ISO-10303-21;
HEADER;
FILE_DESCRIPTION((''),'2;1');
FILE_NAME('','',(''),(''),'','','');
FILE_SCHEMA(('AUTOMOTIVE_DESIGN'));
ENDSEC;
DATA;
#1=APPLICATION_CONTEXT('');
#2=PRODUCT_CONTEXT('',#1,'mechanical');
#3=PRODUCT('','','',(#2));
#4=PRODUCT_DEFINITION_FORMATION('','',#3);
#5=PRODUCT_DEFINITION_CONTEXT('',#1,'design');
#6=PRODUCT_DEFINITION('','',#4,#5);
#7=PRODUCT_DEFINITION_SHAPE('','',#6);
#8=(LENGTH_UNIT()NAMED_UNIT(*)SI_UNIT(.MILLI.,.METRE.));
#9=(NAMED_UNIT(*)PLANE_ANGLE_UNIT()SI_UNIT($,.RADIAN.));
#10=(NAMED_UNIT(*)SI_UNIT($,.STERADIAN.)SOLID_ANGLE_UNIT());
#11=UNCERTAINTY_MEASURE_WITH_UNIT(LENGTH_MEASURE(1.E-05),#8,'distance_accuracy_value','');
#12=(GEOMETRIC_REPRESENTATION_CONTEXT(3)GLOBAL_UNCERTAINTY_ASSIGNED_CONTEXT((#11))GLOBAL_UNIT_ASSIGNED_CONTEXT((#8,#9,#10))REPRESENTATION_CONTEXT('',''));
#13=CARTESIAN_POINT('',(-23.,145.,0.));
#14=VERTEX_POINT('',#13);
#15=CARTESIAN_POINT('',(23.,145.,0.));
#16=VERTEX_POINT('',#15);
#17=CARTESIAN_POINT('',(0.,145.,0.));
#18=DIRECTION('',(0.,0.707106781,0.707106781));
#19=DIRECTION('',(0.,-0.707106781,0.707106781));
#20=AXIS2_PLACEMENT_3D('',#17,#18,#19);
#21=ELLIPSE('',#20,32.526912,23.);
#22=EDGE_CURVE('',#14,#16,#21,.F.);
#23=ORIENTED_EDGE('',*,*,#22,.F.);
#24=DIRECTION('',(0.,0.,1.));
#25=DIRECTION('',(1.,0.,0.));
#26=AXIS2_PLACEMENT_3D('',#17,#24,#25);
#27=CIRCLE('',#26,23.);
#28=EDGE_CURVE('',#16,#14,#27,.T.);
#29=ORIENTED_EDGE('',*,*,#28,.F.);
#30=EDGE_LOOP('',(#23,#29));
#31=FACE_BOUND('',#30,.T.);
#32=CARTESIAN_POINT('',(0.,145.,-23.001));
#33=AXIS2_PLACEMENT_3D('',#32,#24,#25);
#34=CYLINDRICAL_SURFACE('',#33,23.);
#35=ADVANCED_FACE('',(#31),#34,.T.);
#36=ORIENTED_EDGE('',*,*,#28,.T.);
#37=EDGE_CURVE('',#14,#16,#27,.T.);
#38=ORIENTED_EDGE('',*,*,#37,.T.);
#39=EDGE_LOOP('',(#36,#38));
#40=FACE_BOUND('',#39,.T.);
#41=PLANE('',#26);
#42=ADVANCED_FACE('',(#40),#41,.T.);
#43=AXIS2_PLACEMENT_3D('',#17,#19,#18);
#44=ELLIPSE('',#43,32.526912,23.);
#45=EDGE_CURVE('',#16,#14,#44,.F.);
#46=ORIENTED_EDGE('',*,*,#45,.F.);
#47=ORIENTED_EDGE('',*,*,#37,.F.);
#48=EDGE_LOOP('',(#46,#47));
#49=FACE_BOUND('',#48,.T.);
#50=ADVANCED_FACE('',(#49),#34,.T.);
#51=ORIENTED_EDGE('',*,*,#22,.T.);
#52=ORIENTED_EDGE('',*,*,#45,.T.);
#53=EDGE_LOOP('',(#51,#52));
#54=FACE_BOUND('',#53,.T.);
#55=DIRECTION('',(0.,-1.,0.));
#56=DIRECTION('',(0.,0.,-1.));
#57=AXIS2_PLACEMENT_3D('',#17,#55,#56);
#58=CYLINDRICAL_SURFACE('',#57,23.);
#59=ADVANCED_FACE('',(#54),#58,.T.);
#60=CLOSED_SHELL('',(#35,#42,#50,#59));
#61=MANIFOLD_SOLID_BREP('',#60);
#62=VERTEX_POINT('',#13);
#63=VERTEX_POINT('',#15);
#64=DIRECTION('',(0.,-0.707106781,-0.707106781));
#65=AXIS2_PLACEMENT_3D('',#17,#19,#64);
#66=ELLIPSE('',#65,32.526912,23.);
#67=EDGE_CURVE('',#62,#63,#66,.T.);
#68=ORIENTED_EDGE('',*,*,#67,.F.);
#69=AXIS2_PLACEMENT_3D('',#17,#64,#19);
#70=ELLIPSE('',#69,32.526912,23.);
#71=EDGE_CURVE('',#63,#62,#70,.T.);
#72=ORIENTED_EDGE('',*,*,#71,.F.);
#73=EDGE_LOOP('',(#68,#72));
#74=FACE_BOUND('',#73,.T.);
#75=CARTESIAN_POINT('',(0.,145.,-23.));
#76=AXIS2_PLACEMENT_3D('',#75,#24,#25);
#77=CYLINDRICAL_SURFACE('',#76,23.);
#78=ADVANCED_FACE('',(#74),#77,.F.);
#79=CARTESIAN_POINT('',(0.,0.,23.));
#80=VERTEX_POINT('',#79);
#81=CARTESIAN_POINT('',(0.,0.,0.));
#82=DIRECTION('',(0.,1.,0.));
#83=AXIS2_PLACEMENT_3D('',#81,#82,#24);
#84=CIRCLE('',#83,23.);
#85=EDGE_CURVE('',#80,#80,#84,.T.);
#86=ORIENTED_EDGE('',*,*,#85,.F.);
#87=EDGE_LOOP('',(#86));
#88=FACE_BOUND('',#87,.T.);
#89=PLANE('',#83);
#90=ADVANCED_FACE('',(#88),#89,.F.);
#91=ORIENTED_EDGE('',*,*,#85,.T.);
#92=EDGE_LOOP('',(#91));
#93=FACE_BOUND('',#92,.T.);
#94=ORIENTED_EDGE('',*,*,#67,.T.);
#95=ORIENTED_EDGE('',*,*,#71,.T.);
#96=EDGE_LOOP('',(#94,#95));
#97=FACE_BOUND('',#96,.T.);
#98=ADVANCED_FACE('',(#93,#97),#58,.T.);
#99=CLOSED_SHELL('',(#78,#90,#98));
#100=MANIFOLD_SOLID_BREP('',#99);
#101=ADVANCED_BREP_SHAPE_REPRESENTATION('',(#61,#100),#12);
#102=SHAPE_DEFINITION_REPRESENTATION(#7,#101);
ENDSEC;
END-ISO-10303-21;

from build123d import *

# Parameters (mm, degrees)
SKETCH1_R                = 23
BOSS_EXTRUDE1_DEPTH      = 145
CUT_EXTRUDE1_DEPTH       = 149.603499286
CUT_EXTRUDE1_DEPTH_BACK  = 149.603499286
SKETCH2_4_R              = 23
BOSS_EXTRUDE3_REACH      = 150.603
BOSS_EXTRUDE3_END_RADIUS = 23
SKETCH2_R                = 23


with BuildPart() as part:
    # Sketch1 → Boss-Extrude1 (new body)
    with BuildSketch(Plane(origin=(0, 0, 0), x_dir=(1, 0, 0), z_dir=(0, 1, 0))):
        Circle(SKETCH1_R)
    extrude(amount=BOSS_EXTRUDE1_DEPTH)

    # Sketch2<4> → Cut-Extrude1 (cut, two sides: drawn at the far end of the back side and taken through both)
    with BuildSketch(Plane.XY.offset(-CUT_EXTRUDE1_DEPTH_BACK)):
        with Locations((0, 145)):
            Circle(SKETCH2_4_R)
    extrude(amount=CUT_EXTRUDE1_DEPTH + CUT_EXTRUDE1_DEPTH_BACK, mode=Mode.SUBTRACT)


with BuildPart() as body_2:
    # Boss-Extrude3: up to this cylinder (the profile starts inside it)
    boss_extrude3_end = Plane(origin=(0, 145, 0), z_dir=(0, -1, 0)) * Cylinder(BOSS_EXTRUDE3_END_RADIUS, 348.206, mode=Mode.PRIVATE)
    # Sketch2 → Boss-Extrude3 (new, up to the surface)
    with BuildSketch(Plane.XY, mode=Mode.PRIVATE) as boss_extrude3_sk1:
        with Locations((0, 145)):
            Circle(SKETCH2_R)
    boss_extrude3_tool1 = extrude(boss_extrude3_sk1.sketch, amount=-BOSS_EXTRUDE3_REACH, mode=Mode.PRIVATE) & boss_extrude3_end
    add(boss_extrude3_tool1.solids().sort_by_distance((0, 145, 0))[0])


solid = Compound([part.part, body_2.part])
